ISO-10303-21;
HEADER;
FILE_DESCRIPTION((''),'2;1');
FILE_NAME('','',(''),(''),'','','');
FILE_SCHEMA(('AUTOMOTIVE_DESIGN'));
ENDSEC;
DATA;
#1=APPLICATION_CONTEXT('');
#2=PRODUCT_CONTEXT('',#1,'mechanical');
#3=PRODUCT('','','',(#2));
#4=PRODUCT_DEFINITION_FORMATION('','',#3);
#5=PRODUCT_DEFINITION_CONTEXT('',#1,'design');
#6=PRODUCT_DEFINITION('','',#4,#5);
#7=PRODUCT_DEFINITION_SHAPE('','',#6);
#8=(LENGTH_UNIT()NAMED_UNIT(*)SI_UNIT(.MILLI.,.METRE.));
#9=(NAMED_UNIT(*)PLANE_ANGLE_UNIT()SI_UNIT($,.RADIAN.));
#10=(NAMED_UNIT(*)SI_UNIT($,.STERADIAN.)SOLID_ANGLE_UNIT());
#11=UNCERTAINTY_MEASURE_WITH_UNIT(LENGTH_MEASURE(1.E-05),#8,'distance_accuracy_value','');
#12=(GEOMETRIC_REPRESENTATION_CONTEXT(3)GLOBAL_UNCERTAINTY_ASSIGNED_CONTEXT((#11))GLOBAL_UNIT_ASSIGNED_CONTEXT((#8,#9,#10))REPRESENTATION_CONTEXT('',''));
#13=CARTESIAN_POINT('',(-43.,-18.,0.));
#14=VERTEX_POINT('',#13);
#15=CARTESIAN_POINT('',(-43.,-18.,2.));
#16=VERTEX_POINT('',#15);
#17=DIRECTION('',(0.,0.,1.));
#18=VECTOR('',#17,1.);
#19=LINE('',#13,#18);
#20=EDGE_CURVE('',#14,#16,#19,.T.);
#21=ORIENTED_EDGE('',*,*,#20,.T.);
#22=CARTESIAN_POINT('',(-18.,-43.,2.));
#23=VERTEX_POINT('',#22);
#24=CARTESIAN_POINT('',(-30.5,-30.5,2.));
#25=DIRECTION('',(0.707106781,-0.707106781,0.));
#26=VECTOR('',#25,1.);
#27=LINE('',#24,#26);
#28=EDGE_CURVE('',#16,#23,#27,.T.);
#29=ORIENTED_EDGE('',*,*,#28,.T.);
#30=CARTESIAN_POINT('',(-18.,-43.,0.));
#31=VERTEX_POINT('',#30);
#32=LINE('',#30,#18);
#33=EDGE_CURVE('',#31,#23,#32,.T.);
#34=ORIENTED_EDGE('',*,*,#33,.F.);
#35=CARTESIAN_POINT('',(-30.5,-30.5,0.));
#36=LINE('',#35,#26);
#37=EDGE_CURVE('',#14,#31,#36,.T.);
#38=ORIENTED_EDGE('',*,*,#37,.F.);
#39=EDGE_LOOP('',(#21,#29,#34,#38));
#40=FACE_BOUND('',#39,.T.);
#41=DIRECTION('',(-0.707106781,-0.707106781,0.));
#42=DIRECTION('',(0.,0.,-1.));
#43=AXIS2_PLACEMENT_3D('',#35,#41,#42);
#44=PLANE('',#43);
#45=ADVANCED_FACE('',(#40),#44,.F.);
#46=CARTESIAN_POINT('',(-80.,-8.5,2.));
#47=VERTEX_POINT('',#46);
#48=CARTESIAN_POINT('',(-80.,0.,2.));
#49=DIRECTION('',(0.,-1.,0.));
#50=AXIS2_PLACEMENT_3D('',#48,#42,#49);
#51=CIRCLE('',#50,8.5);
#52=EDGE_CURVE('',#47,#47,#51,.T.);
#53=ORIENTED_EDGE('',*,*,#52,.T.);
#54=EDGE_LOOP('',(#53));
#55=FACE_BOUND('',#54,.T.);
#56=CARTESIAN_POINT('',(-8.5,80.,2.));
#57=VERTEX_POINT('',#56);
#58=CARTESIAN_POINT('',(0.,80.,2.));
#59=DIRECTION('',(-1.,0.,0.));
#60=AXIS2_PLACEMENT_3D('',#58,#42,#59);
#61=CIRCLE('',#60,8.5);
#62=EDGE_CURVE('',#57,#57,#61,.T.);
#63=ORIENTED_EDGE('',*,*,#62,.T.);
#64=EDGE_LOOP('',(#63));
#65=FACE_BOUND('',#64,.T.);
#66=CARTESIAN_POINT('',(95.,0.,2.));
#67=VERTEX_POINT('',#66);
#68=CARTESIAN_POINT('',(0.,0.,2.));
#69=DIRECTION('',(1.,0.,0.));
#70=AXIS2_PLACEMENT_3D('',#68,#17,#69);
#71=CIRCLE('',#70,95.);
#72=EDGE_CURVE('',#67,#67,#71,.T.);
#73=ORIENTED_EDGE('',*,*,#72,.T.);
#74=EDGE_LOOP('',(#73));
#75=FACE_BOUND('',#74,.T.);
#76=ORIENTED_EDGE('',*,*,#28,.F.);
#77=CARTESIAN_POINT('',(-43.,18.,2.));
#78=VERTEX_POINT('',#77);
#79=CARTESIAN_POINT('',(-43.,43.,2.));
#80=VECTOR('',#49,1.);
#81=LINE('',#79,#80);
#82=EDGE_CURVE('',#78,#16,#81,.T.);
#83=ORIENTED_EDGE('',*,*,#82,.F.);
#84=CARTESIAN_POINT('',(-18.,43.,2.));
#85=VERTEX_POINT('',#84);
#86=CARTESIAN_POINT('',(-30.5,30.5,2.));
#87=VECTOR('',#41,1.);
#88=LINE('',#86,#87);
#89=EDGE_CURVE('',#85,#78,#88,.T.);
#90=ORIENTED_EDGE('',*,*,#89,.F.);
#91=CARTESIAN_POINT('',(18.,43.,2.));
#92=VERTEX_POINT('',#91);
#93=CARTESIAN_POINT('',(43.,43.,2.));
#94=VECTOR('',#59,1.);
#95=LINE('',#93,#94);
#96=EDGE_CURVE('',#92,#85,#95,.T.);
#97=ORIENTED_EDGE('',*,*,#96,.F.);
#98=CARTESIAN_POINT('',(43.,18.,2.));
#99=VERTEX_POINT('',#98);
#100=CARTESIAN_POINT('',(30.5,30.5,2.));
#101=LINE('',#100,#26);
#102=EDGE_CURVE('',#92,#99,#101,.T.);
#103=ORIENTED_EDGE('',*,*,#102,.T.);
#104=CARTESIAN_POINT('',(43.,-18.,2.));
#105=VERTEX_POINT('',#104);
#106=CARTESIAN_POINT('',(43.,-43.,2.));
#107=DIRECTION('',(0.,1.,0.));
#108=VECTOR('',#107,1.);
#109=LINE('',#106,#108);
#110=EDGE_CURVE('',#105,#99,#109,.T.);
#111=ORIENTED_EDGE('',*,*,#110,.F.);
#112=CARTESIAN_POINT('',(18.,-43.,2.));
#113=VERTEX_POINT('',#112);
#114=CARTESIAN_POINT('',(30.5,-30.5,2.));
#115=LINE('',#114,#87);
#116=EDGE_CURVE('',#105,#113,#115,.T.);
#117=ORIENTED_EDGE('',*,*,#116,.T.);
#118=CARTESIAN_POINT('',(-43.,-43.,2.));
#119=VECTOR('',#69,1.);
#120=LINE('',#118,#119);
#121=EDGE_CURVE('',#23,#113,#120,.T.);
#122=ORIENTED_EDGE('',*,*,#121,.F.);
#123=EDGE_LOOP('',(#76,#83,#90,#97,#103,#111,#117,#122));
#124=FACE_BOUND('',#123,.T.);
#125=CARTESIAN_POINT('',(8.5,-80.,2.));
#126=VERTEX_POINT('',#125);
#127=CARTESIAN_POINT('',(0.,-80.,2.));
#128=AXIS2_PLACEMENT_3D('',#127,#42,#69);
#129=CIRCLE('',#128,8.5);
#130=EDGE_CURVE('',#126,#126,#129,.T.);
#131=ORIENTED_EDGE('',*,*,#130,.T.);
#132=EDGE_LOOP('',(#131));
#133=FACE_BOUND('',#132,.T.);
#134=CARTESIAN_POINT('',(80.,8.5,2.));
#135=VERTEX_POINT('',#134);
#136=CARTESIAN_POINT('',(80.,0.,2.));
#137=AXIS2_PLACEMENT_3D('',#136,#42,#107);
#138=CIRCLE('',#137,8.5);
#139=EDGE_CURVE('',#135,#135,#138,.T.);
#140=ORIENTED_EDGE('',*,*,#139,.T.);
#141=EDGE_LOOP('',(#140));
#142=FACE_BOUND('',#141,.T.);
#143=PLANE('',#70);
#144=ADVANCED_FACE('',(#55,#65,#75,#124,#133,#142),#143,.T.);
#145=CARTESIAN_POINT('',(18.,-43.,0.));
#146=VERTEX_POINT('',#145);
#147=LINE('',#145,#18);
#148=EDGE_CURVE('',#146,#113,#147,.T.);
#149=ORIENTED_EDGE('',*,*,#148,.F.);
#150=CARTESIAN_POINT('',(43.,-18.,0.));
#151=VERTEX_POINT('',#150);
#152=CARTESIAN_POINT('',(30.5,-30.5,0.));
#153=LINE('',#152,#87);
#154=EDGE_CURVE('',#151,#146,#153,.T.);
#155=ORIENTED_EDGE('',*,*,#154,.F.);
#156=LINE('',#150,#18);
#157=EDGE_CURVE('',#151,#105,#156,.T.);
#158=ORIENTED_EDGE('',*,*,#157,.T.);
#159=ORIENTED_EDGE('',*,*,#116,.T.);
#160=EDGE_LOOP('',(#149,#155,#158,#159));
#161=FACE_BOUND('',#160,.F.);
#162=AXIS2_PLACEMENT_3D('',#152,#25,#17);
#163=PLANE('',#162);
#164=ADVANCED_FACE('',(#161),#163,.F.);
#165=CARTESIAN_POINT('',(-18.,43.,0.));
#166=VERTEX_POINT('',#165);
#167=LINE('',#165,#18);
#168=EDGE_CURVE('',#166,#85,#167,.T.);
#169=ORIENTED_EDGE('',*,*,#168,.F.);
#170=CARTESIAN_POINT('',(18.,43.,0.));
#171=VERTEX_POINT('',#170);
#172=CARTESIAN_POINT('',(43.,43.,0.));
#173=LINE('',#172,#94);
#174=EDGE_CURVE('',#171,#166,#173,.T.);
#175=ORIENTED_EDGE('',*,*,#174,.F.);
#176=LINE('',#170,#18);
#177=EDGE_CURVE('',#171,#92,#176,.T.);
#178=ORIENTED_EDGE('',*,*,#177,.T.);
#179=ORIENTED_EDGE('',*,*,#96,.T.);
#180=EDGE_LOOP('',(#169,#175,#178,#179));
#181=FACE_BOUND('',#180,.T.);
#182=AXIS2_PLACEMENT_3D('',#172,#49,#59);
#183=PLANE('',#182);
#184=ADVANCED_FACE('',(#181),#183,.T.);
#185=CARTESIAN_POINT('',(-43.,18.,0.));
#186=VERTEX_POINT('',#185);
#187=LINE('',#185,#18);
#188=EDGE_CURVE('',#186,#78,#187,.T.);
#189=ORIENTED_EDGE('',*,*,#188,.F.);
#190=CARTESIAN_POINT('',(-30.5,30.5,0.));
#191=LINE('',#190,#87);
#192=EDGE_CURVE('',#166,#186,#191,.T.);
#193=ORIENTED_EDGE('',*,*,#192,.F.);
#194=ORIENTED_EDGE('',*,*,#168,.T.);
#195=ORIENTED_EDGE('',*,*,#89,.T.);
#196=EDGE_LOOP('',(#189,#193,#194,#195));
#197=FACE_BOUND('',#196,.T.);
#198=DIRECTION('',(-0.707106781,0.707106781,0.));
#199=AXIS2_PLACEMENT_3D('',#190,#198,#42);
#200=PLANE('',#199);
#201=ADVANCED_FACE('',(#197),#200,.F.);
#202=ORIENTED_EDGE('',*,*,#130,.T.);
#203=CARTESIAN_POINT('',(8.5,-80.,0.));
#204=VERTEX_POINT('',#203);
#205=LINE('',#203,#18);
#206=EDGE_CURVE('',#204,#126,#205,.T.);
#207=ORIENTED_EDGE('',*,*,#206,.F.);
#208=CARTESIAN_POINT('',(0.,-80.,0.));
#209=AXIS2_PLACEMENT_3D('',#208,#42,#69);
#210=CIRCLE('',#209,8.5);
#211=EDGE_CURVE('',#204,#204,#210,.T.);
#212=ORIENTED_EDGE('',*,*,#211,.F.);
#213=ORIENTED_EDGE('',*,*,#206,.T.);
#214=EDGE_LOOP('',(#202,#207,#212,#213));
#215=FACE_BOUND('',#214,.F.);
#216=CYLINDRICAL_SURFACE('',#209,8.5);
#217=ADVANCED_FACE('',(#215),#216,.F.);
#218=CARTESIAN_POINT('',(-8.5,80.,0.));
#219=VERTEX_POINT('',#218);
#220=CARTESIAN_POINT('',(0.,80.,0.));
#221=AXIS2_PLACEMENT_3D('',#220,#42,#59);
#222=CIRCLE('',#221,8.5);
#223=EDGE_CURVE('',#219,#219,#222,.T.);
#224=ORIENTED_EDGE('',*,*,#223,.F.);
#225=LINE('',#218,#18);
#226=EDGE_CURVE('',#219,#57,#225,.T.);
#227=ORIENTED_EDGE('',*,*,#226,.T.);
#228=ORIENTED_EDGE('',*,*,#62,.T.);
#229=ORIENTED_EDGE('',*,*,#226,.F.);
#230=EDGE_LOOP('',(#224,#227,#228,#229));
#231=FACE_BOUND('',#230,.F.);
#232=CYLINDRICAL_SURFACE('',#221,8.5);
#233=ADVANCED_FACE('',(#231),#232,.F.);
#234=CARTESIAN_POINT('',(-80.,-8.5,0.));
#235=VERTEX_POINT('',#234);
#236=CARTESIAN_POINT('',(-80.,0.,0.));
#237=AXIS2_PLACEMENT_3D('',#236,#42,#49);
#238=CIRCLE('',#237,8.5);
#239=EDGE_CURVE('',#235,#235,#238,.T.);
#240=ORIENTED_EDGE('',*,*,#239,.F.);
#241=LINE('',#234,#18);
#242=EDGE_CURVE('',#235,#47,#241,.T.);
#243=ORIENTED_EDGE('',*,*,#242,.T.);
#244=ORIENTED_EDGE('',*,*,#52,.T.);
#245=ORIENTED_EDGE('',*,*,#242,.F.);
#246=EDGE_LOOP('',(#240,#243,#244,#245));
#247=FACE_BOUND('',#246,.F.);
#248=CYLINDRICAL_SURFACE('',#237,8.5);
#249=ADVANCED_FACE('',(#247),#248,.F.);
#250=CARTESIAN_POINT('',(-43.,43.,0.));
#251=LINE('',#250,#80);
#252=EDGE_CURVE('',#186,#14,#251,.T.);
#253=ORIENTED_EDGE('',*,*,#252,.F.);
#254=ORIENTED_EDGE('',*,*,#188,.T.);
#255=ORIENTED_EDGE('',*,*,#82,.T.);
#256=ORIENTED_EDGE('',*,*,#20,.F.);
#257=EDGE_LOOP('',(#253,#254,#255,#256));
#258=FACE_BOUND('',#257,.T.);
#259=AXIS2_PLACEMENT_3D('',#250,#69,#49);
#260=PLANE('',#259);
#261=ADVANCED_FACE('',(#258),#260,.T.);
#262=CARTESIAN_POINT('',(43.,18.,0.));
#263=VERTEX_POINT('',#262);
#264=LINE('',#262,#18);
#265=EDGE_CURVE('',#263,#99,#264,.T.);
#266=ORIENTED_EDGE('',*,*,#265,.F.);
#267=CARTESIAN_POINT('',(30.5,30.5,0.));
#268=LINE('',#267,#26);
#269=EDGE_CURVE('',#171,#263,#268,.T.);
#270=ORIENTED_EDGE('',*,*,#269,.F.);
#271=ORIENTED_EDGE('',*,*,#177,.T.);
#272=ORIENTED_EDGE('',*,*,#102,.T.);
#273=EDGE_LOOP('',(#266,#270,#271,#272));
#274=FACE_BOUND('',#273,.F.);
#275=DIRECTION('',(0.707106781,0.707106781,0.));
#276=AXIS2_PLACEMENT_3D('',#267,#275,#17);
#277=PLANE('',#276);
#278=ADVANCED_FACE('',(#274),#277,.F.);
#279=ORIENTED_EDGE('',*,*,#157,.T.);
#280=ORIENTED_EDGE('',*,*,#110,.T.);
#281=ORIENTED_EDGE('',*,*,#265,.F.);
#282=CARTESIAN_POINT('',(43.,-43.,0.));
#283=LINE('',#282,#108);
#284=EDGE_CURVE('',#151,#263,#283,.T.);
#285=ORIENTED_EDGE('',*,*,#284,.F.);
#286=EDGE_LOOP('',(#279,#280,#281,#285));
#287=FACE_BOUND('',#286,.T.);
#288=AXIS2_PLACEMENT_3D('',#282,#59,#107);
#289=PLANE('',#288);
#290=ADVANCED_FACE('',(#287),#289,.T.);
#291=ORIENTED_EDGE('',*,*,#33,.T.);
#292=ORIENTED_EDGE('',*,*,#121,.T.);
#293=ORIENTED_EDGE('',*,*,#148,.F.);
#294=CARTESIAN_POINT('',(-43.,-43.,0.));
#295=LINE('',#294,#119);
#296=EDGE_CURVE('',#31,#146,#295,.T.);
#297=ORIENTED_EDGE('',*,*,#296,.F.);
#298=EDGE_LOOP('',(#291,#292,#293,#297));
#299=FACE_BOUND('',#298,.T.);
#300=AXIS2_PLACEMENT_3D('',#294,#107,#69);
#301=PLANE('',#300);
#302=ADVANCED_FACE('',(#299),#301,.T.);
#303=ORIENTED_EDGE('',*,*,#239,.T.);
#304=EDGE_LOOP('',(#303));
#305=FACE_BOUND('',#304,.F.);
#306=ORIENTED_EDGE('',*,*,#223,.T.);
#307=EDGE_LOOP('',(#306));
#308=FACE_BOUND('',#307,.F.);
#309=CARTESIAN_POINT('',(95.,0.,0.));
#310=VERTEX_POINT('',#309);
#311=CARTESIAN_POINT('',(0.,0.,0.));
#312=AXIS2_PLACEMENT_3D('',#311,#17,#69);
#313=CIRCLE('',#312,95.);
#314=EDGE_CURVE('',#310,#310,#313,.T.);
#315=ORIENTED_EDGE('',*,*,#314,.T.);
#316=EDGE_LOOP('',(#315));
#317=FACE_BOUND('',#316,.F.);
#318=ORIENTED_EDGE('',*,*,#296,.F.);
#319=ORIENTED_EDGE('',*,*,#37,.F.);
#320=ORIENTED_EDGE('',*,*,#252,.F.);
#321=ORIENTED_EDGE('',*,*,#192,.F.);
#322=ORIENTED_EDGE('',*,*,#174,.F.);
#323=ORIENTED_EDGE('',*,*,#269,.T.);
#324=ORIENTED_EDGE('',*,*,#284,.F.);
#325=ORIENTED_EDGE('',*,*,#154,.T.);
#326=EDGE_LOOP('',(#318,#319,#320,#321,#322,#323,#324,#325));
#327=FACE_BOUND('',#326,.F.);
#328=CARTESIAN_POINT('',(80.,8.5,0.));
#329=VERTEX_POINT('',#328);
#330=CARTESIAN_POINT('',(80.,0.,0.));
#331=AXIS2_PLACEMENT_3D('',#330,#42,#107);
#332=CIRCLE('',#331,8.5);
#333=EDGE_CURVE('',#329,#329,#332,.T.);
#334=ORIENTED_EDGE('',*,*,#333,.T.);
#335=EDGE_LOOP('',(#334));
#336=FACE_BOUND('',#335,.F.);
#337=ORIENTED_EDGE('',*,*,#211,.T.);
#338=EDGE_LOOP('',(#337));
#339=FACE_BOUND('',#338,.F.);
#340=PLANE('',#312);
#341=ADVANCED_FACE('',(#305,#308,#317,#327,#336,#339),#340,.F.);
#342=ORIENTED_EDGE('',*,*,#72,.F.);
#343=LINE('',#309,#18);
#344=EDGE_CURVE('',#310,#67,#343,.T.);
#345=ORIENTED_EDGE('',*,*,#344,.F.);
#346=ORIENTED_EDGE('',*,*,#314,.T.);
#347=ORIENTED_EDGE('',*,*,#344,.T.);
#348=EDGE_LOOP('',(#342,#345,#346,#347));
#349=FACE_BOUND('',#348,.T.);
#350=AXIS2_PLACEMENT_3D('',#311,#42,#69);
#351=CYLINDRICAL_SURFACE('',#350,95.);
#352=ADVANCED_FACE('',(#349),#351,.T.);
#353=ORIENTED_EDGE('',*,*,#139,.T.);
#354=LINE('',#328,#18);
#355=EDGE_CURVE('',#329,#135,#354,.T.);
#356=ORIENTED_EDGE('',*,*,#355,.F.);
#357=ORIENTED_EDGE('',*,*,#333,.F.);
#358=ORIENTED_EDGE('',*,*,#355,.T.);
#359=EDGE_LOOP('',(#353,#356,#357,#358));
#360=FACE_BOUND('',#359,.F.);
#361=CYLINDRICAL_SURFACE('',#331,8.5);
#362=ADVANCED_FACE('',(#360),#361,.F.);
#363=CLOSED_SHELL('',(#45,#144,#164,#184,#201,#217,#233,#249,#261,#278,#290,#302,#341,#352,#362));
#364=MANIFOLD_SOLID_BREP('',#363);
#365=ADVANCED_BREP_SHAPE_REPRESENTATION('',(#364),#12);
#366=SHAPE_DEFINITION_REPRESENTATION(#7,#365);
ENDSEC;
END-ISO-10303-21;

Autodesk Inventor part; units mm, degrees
ref_plane "YZ Plane" through (0, 0, 0) normal (1, 0, 0) x (0, 1, 0)
ref_plane "XZ Plane" through (0, 0, 0) normal (0, 1, 0) x (-1, 0, 0)
ref_plane "XY Plane" through (0, 0, 0) normal (0, 0, 1) x (1, 0, 0)
sketch "Sketch1" plane through (0, 0, 0) normal (0, 0, 1) x (1, 0, 0)
  circle A0 centre (0, 0) radius 95
  line L0 (43, 43) -> (-43, 43)
  line L1 (-43, 43) -> (-43, -43)
  line L2 (-43, -43) -> (43, -43)
  line L3 (43, -43) -> (43, 43)
  line L4 (43, 43) -> (-43, -43) construction
  line L5 (-43, 43) -> (43, -43) construction
  dimension "d157" = 190
  dimension "d158" = 86
  dimension "d159" = 86
extrude "Plate5" add sketch "Sketch1" along normal blind 2
sketch "Sketch7" plane through (0, 0, 0) normal (0, 0, -1) x (-1, 0, 0)
  circle A0 centre (0, 80) radius 8.5
  point P0 (0, 0)
  dimension "d160" = 17
  dimension "d161" = 80
extrude "Cut1" cut sketch "Sketch7" against normal blind 2
pattern_circular "Circular Pattern1" count 4 over 360 about axis through (0, 0, -10) along (0, 0, 1) of "Cut1"
chamfer "Corner Chamfer2" distance 25 angle 45 4 edges at (-43, -43, 1) (43, -43, 1) (-43, 43, 1) (43, 43, 1)
properties part number "PNS 1792  funnel FLANGE 1200 50-90_1000x90" material "Stainless Steel"
